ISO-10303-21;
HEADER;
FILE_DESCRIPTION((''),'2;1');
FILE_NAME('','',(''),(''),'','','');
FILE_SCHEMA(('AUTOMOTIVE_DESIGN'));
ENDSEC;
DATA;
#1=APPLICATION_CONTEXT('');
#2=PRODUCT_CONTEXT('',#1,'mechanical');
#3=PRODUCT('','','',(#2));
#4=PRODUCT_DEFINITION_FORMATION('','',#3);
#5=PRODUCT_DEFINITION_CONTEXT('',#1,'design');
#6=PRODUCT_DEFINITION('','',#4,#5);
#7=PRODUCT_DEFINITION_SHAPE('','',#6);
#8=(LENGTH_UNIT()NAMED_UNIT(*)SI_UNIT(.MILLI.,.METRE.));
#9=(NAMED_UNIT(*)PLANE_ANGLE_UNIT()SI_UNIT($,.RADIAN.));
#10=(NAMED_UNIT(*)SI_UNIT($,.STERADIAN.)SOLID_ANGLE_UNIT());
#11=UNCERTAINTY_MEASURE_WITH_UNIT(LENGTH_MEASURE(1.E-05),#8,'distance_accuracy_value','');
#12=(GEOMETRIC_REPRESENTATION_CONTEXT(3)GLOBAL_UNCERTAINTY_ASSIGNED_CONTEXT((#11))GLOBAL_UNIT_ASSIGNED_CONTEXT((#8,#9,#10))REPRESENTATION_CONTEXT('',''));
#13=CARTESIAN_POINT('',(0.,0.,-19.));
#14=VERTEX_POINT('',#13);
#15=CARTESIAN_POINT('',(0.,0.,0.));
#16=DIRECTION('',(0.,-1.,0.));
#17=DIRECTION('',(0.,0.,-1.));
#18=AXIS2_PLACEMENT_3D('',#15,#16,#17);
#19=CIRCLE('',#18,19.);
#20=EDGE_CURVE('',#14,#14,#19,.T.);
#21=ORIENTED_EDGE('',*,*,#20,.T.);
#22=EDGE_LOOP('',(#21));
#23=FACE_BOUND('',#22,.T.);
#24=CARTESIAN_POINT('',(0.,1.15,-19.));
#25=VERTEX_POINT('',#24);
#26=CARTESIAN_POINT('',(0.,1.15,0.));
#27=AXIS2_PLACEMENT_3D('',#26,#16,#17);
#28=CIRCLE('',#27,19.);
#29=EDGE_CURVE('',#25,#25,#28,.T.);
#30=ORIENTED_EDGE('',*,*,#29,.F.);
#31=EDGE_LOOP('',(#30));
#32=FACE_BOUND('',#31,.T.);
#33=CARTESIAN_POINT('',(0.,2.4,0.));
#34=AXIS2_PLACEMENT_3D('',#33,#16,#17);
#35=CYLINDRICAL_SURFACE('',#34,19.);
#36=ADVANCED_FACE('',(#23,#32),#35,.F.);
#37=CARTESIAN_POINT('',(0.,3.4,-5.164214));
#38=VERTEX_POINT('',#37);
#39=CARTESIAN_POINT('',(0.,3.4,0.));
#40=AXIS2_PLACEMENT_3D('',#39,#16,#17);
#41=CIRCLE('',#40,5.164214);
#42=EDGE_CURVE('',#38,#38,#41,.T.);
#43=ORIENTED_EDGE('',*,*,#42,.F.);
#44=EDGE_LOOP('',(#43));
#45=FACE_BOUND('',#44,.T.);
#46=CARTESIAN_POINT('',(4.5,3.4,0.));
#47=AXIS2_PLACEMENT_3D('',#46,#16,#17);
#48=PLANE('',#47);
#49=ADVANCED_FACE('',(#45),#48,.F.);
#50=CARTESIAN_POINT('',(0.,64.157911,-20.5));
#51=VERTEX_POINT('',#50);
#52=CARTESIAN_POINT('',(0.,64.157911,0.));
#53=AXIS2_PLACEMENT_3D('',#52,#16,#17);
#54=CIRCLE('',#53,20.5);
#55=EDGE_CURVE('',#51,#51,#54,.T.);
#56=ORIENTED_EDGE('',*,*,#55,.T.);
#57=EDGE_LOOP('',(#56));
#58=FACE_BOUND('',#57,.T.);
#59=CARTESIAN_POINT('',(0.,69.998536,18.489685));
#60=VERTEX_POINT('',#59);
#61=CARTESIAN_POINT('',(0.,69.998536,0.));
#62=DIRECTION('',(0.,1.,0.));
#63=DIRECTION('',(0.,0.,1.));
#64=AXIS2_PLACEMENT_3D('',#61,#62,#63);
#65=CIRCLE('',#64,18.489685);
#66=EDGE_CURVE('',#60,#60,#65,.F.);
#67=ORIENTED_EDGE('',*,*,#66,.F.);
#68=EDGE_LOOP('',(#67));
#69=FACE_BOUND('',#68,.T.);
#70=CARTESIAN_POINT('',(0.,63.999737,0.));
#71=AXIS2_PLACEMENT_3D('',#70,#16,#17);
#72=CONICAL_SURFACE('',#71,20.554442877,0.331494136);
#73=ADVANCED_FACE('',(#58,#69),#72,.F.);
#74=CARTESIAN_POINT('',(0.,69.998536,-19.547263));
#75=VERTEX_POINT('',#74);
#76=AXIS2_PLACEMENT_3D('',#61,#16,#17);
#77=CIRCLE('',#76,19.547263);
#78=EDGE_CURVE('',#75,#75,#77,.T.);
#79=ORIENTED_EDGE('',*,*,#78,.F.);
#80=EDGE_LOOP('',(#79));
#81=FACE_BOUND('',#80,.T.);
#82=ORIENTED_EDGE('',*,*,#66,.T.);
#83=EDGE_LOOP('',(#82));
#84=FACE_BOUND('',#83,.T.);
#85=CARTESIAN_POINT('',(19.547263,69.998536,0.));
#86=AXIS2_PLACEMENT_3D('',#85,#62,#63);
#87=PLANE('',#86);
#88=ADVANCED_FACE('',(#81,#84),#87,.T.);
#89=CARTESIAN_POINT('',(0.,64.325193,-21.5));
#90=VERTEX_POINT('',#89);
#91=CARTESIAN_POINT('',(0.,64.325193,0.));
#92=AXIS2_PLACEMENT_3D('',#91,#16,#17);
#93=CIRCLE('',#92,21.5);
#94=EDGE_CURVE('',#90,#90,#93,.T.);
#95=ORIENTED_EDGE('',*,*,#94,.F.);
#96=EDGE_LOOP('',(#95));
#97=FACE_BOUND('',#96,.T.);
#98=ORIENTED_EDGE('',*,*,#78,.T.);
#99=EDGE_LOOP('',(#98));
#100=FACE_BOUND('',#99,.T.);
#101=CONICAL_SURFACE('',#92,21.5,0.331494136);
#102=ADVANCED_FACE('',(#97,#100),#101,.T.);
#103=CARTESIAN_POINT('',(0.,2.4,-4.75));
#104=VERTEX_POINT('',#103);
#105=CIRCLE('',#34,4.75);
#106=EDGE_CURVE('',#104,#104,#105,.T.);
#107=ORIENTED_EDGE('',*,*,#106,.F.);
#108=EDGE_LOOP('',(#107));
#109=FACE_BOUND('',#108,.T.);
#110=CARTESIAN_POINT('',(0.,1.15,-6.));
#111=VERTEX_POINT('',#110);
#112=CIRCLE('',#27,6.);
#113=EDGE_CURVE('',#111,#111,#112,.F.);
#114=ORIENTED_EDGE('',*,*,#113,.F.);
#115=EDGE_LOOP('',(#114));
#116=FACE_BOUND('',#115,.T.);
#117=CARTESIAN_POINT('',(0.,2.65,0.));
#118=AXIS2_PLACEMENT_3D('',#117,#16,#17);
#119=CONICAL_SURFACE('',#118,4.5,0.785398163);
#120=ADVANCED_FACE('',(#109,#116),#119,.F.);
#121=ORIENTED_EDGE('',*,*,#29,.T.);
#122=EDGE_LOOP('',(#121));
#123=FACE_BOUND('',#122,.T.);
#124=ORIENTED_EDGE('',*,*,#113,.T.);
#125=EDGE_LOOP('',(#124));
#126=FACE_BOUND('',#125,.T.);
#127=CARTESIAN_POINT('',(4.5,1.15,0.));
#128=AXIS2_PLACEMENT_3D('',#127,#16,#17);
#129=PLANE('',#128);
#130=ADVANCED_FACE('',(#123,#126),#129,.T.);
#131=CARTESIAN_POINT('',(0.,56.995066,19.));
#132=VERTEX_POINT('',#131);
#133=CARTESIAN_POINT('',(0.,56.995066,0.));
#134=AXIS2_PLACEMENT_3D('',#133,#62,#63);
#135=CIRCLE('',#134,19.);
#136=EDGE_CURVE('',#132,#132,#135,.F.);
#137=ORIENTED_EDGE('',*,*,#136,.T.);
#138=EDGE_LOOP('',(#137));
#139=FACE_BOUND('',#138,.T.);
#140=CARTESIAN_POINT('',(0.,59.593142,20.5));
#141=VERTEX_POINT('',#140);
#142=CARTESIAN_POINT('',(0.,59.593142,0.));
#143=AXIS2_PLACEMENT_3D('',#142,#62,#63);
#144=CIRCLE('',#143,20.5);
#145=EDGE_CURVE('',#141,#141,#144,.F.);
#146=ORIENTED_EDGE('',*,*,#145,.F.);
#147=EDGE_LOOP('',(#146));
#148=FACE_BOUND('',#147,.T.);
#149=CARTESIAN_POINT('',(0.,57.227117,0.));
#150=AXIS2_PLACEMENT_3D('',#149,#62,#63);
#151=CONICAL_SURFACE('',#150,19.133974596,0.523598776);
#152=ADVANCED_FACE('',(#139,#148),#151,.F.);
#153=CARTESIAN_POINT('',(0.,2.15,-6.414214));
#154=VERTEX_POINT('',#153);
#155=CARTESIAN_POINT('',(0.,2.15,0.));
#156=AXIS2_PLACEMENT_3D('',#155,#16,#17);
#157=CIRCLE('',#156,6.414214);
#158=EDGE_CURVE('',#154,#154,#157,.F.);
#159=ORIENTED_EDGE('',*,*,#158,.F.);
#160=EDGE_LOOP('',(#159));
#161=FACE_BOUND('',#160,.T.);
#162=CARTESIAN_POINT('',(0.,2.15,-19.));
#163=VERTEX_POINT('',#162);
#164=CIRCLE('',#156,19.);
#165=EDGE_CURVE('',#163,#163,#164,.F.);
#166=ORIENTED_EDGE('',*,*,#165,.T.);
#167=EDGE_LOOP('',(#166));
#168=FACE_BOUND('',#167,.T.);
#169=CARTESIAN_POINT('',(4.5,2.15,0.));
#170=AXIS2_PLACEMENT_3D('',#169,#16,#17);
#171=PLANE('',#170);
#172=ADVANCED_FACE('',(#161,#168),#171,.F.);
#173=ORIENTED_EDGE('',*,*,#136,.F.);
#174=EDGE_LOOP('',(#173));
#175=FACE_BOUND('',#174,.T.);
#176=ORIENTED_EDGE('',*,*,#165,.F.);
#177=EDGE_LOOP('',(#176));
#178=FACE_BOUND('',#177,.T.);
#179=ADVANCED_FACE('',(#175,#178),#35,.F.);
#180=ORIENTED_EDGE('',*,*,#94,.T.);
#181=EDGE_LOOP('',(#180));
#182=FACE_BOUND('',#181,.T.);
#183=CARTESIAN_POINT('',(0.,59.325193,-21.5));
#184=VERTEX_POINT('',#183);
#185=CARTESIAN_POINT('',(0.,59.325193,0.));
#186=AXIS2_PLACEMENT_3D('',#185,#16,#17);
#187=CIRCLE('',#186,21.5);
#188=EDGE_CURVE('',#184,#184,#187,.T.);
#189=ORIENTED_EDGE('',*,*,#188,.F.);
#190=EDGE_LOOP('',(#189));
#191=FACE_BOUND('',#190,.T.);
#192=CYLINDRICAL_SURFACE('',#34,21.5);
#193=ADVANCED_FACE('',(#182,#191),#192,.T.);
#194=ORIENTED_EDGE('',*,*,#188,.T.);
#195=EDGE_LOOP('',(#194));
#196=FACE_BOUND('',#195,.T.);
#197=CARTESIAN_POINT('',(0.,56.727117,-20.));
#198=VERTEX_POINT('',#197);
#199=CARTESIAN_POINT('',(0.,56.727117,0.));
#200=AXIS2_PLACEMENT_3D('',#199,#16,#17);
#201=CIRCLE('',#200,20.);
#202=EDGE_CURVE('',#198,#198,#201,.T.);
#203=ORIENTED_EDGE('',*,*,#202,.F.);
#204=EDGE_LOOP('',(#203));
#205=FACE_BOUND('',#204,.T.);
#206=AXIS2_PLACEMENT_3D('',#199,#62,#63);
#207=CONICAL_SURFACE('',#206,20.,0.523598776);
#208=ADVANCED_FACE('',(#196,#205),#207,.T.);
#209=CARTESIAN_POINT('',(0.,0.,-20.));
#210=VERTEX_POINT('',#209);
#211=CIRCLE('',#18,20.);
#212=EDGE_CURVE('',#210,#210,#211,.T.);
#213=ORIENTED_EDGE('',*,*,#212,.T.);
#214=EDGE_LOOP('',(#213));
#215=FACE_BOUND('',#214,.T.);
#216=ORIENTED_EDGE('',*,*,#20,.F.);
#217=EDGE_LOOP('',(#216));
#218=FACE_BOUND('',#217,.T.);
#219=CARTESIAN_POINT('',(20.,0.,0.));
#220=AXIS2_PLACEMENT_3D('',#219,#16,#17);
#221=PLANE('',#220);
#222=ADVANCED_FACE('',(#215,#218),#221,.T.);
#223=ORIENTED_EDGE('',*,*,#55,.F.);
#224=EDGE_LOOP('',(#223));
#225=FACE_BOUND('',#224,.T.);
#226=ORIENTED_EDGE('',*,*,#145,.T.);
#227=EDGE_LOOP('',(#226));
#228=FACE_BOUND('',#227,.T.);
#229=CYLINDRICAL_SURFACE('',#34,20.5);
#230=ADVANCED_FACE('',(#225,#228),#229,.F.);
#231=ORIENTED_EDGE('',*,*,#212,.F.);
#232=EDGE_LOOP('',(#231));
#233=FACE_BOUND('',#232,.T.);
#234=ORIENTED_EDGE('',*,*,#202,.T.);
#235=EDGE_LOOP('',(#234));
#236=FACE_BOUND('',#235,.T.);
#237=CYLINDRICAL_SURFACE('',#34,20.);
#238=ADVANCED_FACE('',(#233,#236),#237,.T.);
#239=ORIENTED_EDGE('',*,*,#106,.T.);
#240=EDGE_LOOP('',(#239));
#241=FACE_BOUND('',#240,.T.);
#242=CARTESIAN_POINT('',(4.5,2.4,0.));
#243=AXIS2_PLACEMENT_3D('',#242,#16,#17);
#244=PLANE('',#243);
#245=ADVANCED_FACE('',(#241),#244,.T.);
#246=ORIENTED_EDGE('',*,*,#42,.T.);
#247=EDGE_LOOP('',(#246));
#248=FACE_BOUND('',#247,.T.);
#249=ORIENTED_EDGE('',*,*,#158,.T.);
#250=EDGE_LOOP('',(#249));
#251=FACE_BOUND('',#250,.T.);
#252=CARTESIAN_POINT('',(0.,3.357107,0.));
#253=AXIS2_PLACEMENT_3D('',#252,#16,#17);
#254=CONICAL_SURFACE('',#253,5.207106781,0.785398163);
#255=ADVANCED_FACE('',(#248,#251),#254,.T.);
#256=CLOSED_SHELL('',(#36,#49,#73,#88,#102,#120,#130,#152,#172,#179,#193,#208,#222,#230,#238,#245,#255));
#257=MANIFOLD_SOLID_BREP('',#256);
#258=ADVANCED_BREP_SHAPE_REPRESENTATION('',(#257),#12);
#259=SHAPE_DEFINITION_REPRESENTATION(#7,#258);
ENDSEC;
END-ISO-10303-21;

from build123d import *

# Parameters (mm, degrees)
FILLET1_SIZE = 1.5


# Read off the part's stored shape, not the designer's step: Shell1
with BuildPart() as part:
    # Sketch1 → Revolve1 (revolve)
    with BuildSketch(Plane.XY, mode=Mode.PRIVATE) as revolve1_sk:
        Polygon((20, 0), (20, 56.727116956), (21.5, 59.325193167), (21.5, 64.325193167), (19.547262907, 69.998535907), (0, 69.998535907), (0, 2.4), (4.5, 2.4), (4.5, 1.15), (19, 1.15), (19, 0), align=None)
    revolve(revolve1_sk.sketch.rotate(Axis((0, 2.4, 0), (0, 1, 0)), 90), axis=Axis((0, 2.4, 0), (0, 1, 0)))

    # Fillet1
    # the kernel refuses this chamfer: 1.5 mm, written as the material it takes off along each edge
    with BuildSketch(Plane(origin=(0, 1.15, 0), x_dir=(0, 0, -1), z_dir=(1, 0, 0))) as fillet1_piece_1_section:
        Polygon((4.5, FILLET1_SIZE), (4.5 + FILLET1_SIZE, 0), (4.5, 0), align=None)
    fillet1_piece_1 = revolve(axis=Axis((0, 1.15, 0), (0, 1, 0)), mode=Mode.PRIVATE)
    fillet1_piece_1 = split(fillet1_piece_1, bisect_by=Plane(origin=(0, 2.4, 5.37255081), z_dir=(0, -1, 0)), keep=Keep.TOP, mode=Mode.PRIVATE)
    add(fillet1_piece_1, mode=Mode.SUBTRACT)

    # Shell1 outline → Shell1 (revolve, cut)
    with BuildSketch(Plane.XY):
        Polygon((18.489685342, 69.998535907), (0, 69.998535907), (0, 3.4), (5.164213562, 3.4), (6.414213562, 2.15), (19, 2.15), (19, 56.995066148), (20.5, 59.59314236), (20.5, 64.157911426), align=None)
    revolve(axis=Axis((0, 0, 0), (0, 1, 0)), mode=Mode.SUBTRACT)


solid = part.part
